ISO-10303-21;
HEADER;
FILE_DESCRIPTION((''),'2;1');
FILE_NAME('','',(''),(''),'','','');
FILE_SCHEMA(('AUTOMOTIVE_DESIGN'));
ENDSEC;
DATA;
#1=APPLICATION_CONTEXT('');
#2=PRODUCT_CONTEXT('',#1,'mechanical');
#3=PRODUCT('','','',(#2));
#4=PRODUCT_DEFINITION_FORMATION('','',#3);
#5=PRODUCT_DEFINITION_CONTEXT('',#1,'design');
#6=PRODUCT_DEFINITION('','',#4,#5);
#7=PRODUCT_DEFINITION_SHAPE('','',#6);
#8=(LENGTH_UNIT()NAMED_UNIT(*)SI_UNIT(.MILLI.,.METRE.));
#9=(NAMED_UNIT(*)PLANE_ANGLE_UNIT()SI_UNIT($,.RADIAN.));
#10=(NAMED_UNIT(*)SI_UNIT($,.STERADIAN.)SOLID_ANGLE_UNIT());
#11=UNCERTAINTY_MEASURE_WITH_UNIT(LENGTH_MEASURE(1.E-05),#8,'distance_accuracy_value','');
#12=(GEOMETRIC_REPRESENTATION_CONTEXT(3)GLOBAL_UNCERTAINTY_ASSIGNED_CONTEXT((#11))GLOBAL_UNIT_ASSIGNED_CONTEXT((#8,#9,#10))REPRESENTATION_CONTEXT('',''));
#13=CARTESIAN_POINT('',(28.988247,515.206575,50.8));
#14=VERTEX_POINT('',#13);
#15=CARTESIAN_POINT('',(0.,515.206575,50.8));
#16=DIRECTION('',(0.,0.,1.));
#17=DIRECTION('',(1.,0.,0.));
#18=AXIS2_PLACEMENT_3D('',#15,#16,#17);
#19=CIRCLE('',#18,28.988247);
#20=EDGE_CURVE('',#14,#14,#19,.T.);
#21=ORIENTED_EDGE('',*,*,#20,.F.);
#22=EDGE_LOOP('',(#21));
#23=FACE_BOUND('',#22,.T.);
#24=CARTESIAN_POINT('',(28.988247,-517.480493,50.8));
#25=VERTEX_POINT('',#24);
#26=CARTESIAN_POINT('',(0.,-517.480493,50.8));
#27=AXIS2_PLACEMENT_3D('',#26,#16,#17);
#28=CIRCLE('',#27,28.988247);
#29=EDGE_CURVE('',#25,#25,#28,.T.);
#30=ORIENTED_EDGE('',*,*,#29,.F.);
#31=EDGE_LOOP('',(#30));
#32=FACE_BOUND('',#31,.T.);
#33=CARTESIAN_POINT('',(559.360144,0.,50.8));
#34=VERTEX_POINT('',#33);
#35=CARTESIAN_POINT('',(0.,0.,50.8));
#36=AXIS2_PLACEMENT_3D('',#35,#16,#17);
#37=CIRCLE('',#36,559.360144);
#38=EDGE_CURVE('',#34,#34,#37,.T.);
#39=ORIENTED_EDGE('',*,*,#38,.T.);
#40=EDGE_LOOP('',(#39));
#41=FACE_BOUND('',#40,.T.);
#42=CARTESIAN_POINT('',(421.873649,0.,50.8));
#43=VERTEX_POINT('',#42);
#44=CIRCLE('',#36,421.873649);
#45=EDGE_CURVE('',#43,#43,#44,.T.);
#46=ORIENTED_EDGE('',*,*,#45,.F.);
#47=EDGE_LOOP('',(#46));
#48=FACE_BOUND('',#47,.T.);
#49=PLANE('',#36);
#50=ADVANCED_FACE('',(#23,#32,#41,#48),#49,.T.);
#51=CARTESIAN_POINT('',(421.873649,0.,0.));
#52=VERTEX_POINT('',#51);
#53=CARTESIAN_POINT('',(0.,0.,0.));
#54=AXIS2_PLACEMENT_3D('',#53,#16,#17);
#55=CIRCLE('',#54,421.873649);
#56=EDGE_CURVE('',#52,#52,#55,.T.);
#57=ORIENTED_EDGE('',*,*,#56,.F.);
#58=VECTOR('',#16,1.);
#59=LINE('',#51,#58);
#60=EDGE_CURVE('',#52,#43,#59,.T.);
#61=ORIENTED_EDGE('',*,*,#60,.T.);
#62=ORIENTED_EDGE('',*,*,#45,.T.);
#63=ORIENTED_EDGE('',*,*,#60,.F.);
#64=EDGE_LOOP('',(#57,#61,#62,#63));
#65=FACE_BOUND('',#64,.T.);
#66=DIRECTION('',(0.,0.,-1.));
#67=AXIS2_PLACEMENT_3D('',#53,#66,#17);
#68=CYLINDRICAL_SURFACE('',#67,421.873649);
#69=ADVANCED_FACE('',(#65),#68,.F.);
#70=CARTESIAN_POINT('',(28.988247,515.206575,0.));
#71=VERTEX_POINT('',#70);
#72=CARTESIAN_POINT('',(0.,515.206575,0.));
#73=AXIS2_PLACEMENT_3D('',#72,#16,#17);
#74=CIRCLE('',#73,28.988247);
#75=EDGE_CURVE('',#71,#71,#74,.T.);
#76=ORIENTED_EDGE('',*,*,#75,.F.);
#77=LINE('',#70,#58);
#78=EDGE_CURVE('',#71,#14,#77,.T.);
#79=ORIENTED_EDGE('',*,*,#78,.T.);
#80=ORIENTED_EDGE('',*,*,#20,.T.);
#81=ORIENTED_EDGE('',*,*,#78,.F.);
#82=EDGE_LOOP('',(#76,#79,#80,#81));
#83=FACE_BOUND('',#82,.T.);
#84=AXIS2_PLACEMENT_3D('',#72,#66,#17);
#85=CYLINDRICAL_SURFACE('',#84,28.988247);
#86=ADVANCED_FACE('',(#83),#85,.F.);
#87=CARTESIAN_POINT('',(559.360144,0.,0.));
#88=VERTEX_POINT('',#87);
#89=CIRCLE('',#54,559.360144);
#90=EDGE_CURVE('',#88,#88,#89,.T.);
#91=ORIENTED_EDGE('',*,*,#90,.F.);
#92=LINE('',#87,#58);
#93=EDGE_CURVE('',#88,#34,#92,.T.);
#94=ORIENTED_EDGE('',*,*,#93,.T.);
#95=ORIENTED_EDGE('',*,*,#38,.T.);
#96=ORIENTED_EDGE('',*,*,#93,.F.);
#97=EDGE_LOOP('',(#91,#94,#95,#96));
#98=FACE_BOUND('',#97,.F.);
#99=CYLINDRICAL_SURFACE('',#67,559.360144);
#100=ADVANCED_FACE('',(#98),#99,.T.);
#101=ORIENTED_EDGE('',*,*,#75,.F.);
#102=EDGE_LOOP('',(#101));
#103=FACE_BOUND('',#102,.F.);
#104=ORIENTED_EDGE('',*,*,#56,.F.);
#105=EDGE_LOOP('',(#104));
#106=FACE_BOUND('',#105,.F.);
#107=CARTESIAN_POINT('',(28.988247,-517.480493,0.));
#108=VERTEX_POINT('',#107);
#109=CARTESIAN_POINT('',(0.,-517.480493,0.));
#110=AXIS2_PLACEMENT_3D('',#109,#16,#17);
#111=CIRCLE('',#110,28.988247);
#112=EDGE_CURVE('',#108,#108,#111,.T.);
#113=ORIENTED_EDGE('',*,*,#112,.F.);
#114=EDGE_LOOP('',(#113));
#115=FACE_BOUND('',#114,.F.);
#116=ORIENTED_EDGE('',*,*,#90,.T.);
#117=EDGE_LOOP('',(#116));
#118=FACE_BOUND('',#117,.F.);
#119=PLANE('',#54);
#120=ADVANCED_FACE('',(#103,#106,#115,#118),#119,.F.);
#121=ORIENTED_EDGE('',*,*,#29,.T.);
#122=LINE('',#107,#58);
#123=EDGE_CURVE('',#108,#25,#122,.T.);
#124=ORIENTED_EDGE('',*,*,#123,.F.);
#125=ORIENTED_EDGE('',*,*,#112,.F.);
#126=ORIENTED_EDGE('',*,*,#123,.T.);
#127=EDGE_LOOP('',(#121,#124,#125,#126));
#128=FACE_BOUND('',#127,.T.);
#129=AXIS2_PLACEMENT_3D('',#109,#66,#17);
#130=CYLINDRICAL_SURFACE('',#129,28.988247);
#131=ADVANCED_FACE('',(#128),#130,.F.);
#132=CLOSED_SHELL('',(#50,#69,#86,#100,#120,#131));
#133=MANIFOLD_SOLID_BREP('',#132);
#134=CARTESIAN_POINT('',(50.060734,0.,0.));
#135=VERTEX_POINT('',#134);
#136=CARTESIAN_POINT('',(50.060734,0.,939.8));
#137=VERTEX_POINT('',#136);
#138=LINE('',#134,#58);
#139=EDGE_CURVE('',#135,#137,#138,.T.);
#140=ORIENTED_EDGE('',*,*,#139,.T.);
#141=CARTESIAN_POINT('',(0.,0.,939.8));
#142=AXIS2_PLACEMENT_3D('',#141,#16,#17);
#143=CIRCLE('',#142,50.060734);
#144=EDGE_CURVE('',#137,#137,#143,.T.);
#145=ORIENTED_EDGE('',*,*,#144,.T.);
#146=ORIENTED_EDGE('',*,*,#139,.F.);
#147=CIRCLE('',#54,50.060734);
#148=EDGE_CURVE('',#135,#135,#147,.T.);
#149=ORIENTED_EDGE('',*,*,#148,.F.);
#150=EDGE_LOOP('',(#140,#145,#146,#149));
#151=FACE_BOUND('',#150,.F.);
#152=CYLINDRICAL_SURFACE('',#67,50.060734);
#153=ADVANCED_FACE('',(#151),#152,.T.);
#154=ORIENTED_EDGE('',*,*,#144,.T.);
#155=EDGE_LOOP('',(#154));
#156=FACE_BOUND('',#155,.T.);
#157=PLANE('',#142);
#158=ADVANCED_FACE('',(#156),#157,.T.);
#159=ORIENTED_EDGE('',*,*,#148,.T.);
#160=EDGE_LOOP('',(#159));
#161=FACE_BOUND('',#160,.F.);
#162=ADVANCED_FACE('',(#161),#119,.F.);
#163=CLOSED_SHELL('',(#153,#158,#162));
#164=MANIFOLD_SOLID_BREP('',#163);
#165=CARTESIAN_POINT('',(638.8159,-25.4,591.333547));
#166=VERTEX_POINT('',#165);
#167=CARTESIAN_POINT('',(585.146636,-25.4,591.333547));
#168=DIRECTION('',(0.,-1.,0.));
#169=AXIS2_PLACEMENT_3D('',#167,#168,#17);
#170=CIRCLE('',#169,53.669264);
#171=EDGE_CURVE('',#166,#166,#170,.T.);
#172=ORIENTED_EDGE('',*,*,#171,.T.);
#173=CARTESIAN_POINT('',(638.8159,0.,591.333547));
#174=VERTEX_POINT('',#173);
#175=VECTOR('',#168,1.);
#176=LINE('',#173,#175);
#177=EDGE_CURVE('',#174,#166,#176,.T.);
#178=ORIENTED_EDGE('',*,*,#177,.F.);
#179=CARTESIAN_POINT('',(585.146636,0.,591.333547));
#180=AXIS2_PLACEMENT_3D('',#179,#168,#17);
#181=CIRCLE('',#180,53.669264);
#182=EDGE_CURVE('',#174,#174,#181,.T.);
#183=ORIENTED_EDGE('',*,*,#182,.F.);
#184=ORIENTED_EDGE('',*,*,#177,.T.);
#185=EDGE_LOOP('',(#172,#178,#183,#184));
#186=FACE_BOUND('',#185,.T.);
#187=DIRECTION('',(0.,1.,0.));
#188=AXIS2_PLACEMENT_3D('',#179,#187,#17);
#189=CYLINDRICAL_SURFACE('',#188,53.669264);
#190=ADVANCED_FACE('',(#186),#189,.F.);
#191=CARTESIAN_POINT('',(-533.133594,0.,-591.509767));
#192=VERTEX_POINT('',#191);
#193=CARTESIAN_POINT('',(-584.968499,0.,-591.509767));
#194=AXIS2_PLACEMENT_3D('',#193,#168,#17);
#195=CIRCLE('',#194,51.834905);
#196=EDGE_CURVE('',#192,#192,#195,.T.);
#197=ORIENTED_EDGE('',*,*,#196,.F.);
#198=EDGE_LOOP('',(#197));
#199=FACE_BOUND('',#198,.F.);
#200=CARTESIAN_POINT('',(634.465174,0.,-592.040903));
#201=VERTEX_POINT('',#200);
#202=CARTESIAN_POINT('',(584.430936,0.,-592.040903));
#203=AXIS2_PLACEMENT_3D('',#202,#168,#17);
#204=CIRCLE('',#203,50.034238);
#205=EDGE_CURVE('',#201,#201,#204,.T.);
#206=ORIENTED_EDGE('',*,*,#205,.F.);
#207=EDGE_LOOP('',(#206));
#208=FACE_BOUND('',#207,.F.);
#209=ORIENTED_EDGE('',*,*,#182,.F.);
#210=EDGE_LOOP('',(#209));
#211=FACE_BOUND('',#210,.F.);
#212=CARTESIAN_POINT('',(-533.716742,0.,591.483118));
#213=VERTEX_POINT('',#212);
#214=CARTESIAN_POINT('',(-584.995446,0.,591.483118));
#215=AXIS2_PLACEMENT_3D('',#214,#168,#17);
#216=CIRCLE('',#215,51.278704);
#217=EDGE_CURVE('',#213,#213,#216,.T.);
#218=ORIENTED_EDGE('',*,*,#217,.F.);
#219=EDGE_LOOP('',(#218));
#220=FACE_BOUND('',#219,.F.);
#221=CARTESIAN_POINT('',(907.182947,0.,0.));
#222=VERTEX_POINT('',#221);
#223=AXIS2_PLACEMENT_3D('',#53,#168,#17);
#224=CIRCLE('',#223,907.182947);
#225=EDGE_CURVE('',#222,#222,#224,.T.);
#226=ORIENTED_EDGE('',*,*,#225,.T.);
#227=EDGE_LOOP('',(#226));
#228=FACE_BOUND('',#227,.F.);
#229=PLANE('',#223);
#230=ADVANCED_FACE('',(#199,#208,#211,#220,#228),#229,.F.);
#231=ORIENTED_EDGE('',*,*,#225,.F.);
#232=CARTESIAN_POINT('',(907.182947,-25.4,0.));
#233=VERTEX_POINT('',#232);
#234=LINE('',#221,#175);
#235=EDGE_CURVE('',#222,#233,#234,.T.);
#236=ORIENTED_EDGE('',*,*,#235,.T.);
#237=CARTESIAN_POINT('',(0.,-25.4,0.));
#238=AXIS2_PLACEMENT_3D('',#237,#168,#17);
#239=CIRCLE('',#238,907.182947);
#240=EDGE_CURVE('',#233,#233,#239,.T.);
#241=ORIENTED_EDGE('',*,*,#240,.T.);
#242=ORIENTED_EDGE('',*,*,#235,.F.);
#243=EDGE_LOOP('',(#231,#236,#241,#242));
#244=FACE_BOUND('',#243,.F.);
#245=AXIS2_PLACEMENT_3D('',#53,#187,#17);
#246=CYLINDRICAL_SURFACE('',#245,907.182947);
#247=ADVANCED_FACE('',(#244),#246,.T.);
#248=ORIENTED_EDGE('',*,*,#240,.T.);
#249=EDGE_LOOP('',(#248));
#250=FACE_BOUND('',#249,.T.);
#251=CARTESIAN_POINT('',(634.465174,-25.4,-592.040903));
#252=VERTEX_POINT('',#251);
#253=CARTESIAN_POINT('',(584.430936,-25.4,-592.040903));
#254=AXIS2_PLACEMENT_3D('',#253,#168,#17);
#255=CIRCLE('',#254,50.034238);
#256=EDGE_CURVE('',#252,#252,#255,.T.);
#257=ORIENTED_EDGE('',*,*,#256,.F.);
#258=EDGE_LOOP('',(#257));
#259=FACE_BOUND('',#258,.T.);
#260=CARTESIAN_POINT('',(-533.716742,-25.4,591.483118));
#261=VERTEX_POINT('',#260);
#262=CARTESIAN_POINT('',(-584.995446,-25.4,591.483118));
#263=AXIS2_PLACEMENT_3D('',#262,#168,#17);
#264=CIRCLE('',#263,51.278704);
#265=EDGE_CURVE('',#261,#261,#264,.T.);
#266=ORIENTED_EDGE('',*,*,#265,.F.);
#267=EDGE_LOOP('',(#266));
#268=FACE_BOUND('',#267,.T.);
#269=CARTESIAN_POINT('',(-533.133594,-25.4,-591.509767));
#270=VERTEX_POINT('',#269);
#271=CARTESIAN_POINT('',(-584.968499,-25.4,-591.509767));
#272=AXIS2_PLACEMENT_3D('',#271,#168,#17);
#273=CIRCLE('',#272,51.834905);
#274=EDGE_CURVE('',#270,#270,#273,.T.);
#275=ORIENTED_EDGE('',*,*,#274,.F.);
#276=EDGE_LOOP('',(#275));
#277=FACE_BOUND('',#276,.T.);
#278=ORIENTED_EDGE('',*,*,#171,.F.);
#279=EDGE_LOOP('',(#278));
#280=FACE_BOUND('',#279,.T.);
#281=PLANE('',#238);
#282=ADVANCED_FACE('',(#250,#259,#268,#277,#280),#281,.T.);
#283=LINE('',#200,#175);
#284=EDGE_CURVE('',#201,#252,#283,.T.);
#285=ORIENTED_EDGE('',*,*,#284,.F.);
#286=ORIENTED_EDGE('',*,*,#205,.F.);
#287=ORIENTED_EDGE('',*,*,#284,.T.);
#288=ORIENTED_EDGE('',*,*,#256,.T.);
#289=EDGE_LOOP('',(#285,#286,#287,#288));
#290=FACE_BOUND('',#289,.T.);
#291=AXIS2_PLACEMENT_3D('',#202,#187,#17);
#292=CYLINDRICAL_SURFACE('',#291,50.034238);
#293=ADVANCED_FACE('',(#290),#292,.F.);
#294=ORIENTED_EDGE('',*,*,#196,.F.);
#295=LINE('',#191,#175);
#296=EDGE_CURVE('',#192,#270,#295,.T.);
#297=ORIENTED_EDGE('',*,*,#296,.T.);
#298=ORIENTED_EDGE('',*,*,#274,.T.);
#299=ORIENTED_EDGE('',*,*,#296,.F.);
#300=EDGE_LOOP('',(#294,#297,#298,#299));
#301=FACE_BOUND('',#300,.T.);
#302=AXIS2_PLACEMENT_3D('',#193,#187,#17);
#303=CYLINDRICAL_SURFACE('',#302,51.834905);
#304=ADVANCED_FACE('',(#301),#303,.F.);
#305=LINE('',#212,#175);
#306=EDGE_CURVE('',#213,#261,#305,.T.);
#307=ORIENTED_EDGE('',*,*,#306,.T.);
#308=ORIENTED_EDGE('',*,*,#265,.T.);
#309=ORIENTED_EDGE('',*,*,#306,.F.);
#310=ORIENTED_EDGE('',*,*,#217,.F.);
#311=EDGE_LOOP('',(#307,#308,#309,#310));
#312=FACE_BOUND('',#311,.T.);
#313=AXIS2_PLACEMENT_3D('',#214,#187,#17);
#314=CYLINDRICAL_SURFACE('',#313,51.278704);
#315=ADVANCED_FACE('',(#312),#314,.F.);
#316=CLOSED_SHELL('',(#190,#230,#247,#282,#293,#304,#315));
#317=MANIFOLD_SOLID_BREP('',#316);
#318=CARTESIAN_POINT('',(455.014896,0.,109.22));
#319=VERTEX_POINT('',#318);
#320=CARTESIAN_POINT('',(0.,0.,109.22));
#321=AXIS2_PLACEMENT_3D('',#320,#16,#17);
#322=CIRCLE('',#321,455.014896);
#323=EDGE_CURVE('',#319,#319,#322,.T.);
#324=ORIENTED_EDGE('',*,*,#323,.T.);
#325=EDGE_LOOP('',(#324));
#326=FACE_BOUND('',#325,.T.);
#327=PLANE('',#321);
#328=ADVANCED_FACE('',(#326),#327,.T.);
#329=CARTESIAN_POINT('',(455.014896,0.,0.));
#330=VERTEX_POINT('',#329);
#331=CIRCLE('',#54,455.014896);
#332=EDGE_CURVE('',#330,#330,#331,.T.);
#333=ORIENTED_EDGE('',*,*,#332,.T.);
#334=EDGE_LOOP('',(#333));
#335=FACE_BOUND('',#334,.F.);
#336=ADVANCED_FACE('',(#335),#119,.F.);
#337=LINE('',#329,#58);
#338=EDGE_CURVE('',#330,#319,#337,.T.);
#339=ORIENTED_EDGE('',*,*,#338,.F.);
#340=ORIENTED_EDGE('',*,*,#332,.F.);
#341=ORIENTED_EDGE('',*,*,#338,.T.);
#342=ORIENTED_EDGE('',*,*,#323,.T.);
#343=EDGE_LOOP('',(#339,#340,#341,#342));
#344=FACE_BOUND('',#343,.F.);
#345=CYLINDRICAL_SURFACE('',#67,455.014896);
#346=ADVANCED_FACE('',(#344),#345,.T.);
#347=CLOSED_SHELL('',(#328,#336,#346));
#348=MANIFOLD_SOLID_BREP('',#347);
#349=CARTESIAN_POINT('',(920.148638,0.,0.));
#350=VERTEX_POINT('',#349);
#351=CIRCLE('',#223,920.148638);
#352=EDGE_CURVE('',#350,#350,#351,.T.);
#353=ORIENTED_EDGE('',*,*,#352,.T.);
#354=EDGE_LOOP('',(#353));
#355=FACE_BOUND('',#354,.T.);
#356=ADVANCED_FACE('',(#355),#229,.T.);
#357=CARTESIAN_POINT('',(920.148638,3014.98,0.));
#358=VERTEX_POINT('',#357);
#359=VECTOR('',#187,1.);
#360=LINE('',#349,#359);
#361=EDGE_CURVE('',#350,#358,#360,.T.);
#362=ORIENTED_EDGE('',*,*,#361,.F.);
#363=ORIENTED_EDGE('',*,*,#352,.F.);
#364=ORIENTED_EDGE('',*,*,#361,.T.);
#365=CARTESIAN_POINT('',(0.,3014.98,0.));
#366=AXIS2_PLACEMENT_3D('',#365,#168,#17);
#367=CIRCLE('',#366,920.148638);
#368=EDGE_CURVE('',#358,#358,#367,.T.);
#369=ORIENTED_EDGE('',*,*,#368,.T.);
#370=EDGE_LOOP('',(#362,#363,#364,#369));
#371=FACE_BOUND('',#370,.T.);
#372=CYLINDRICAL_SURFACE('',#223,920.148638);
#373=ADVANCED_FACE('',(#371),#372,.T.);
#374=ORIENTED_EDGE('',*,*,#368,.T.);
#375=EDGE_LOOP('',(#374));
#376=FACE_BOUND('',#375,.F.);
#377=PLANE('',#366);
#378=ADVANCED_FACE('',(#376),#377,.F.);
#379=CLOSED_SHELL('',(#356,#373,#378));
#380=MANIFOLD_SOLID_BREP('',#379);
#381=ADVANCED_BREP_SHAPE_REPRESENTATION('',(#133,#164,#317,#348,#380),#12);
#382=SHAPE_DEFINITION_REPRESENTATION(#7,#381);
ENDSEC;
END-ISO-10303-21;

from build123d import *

# Parameters (mm, degrees)
F0_R      = 920.1486376433
F1_DEPTH  = 3014.98
F2_R      = 559.3601435022
F2_R_2    = 28.9882466608
F2_R_3    = 421.8736491985
F3_DEPTH  = 50.8
F4_R      = 455.014896114
F6_DEPTH  = 109.22
F7_R      = 907.1829468917
F7_R_2    = 51.8349054872
F7_R_3    = 50.0342377905
F7_R_4    = 51.2787041201
F7_R_5    = 53.6692639751
F8_DEPTH  = 25.4
F9_R      = 50.0607336969
F10_DEPTH = 939.8


# Not quite as in the source:
# - the program builds the solid bodies; features that only make, move or delete a surface that nothing else refers to are left out


with BuildPart() as f1:
    # F0 (on Front) → F1 (new body)
    with BuildSketch(Plane.XZ):
        Circle(F0_R)
    extrude(amount=-F1_DEPTH)


with BuildPart() as f3:
    # F2 (on Top) → F3 (new body)
    with BuildSketch(Plane.XY):
        Circle(F2_R)
        with Locations((0, -517.4804925919)):
            Circle(F2_R_2, mode=Mode.SUBTRACT)
        Circle(F2_R_3, mode=Mode.SUBTRACT)
        with Locations((0, 515.2065753937)):
            Circle(F2_R_2, mode=Mode.SUBTRACT)
    extrude(amount=F3_DEPTH)


with BuildPart() as f6:
    # F4 (on Top) → F6 (new body)
    with BuildSketch(Plane.XY):
        Circle(F4_R)
    extrude(amount=F6_DEPTH)


with BuildPart() as f8:
    # F7 (on Front) → F8 (new body)
    with BuildSketch(Plane.XZ):
        Circle(F7_R)
        with Locations((-584.9684993263, -591.5097674587)):
            Circle(F7_R_2, mode=Mode.SUBTRACT)
        with Locations((584.4309362264, -592.0409031348)):
            Circle(F7_R_3, mode=Mode.SUBTRACT)
        with Locations((-584.9954457836, 591.4831177773)):
            Circle(F7_R_4, mode=Mode.SUBTRACT)
        with Locations((585.1466364716, 591.3335471873)):
            Circle(F7_R_5, mode=Mode.SUBTRACT)
    extrude(amount=F8_DEPTH)


with BuildPart() as f10:
    # F9 (on Top) → F10 (new body)
    with BuildSketch(Plane.XY):
        Circle(F9_R)
    extrude(amount=F10_DEPTH)


solid = Compound([f1.part, f3.part, f6.part, f8.part, f10.part])
